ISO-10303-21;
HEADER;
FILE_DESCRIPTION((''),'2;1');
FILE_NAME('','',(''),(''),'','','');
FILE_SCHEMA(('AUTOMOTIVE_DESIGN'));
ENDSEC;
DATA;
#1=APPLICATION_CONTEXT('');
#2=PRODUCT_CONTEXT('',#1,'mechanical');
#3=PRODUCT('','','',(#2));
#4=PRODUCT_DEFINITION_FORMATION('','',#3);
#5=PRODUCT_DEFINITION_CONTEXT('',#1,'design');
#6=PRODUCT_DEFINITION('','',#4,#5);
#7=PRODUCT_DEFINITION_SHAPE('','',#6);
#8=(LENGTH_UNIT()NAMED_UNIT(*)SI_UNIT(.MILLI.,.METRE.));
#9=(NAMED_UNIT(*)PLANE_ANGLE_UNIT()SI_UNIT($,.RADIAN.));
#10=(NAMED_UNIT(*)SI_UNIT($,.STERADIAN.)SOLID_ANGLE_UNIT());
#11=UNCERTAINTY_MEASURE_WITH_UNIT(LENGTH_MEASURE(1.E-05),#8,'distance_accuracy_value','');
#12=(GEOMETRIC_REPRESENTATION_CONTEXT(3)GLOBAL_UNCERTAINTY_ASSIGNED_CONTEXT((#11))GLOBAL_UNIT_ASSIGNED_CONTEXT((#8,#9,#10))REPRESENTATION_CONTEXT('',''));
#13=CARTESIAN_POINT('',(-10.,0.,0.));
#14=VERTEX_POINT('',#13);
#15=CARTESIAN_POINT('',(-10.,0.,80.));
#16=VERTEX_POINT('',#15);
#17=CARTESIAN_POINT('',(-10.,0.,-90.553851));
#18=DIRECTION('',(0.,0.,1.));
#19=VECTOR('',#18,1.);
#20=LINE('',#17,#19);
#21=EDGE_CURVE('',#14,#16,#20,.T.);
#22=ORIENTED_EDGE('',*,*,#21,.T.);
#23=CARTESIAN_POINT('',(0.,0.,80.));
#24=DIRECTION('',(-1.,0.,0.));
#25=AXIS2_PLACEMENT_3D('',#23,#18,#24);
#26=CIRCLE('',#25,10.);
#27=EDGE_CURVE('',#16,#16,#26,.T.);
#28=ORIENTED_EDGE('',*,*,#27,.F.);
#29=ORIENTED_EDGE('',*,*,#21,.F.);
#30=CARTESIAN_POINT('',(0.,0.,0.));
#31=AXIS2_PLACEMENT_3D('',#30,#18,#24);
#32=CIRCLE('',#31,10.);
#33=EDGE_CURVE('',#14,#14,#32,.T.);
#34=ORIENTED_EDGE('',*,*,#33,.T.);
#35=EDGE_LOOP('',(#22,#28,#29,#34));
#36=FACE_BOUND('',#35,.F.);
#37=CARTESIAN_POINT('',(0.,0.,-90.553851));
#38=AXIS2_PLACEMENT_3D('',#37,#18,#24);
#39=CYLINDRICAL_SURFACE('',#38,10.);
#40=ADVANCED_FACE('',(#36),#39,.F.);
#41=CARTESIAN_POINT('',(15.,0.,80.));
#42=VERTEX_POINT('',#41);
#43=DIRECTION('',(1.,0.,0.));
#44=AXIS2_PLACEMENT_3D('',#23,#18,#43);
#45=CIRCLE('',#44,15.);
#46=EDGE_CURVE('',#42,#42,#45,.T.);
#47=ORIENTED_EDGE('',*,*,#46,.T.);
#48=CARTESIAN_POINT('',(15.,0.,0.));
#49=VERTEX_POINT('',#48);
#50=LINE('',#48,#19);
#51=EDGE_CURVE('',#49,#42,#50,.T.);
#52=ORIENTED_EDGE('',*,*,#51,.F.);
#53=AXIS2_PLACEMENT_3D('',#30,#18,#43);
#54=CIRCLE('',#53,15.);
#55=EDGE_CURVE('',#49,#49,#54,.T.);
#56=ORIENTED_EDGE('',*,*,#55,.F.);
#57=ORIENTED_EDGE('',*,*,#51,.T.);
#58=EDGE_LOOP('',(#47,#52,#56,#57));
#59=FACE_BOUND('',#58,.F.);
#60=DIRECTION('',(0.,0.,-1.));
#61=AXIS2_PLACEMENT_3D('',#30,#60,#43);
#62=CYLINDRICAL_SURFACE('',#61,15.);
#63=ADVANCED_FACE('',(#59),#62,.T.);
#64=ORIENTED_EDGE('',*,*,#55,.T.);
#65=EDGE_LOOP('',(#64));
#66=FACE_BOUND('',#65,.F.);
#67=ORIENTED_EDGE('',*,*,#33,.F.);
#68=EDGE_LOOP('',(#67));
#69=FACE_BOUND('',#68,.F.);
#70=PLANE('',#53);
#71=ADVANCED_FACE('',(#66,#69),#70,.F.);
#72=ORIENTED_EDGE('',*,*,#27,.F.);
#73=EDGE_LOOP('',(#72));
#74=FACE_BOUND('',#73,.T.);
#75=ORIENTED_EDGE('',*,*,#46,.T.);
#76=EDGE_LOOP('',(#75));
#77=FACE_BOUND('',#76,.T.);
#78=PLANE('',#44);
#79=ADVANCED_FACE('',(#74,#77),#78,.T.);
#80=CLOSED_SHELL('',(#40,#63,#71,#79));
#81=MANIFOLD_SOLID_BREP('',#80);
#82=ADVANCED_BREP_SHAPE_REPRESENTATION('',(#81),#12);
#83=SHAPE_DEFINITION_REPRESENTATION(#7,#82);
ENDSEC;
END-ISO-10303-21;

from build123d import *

# Parameters (mm, degrees)
F0_R     = 15
F1_DEPTH = 80
F3_D     = 20


# Not quite as in the source:
# - the program builds the solid bodies; features that only make, move or delete a surface that nothing else refers to are left out


with BuildPart() as f1:
    # F0 (on Top) → F1 (new body)
    with BuildSketch(Plane.XY):
        Circle(F0_R)
    extrude(amount=F1_DEPTH)

    # F3 (through all)
    with Locations(Plane(origin=(0, 0, 0), x_dir=(1, 0, 0), z_dir=(0, 0, -1))):
        with Locations((0, 0)):
            Hole(F3_D / 2)


solid = f1.part
